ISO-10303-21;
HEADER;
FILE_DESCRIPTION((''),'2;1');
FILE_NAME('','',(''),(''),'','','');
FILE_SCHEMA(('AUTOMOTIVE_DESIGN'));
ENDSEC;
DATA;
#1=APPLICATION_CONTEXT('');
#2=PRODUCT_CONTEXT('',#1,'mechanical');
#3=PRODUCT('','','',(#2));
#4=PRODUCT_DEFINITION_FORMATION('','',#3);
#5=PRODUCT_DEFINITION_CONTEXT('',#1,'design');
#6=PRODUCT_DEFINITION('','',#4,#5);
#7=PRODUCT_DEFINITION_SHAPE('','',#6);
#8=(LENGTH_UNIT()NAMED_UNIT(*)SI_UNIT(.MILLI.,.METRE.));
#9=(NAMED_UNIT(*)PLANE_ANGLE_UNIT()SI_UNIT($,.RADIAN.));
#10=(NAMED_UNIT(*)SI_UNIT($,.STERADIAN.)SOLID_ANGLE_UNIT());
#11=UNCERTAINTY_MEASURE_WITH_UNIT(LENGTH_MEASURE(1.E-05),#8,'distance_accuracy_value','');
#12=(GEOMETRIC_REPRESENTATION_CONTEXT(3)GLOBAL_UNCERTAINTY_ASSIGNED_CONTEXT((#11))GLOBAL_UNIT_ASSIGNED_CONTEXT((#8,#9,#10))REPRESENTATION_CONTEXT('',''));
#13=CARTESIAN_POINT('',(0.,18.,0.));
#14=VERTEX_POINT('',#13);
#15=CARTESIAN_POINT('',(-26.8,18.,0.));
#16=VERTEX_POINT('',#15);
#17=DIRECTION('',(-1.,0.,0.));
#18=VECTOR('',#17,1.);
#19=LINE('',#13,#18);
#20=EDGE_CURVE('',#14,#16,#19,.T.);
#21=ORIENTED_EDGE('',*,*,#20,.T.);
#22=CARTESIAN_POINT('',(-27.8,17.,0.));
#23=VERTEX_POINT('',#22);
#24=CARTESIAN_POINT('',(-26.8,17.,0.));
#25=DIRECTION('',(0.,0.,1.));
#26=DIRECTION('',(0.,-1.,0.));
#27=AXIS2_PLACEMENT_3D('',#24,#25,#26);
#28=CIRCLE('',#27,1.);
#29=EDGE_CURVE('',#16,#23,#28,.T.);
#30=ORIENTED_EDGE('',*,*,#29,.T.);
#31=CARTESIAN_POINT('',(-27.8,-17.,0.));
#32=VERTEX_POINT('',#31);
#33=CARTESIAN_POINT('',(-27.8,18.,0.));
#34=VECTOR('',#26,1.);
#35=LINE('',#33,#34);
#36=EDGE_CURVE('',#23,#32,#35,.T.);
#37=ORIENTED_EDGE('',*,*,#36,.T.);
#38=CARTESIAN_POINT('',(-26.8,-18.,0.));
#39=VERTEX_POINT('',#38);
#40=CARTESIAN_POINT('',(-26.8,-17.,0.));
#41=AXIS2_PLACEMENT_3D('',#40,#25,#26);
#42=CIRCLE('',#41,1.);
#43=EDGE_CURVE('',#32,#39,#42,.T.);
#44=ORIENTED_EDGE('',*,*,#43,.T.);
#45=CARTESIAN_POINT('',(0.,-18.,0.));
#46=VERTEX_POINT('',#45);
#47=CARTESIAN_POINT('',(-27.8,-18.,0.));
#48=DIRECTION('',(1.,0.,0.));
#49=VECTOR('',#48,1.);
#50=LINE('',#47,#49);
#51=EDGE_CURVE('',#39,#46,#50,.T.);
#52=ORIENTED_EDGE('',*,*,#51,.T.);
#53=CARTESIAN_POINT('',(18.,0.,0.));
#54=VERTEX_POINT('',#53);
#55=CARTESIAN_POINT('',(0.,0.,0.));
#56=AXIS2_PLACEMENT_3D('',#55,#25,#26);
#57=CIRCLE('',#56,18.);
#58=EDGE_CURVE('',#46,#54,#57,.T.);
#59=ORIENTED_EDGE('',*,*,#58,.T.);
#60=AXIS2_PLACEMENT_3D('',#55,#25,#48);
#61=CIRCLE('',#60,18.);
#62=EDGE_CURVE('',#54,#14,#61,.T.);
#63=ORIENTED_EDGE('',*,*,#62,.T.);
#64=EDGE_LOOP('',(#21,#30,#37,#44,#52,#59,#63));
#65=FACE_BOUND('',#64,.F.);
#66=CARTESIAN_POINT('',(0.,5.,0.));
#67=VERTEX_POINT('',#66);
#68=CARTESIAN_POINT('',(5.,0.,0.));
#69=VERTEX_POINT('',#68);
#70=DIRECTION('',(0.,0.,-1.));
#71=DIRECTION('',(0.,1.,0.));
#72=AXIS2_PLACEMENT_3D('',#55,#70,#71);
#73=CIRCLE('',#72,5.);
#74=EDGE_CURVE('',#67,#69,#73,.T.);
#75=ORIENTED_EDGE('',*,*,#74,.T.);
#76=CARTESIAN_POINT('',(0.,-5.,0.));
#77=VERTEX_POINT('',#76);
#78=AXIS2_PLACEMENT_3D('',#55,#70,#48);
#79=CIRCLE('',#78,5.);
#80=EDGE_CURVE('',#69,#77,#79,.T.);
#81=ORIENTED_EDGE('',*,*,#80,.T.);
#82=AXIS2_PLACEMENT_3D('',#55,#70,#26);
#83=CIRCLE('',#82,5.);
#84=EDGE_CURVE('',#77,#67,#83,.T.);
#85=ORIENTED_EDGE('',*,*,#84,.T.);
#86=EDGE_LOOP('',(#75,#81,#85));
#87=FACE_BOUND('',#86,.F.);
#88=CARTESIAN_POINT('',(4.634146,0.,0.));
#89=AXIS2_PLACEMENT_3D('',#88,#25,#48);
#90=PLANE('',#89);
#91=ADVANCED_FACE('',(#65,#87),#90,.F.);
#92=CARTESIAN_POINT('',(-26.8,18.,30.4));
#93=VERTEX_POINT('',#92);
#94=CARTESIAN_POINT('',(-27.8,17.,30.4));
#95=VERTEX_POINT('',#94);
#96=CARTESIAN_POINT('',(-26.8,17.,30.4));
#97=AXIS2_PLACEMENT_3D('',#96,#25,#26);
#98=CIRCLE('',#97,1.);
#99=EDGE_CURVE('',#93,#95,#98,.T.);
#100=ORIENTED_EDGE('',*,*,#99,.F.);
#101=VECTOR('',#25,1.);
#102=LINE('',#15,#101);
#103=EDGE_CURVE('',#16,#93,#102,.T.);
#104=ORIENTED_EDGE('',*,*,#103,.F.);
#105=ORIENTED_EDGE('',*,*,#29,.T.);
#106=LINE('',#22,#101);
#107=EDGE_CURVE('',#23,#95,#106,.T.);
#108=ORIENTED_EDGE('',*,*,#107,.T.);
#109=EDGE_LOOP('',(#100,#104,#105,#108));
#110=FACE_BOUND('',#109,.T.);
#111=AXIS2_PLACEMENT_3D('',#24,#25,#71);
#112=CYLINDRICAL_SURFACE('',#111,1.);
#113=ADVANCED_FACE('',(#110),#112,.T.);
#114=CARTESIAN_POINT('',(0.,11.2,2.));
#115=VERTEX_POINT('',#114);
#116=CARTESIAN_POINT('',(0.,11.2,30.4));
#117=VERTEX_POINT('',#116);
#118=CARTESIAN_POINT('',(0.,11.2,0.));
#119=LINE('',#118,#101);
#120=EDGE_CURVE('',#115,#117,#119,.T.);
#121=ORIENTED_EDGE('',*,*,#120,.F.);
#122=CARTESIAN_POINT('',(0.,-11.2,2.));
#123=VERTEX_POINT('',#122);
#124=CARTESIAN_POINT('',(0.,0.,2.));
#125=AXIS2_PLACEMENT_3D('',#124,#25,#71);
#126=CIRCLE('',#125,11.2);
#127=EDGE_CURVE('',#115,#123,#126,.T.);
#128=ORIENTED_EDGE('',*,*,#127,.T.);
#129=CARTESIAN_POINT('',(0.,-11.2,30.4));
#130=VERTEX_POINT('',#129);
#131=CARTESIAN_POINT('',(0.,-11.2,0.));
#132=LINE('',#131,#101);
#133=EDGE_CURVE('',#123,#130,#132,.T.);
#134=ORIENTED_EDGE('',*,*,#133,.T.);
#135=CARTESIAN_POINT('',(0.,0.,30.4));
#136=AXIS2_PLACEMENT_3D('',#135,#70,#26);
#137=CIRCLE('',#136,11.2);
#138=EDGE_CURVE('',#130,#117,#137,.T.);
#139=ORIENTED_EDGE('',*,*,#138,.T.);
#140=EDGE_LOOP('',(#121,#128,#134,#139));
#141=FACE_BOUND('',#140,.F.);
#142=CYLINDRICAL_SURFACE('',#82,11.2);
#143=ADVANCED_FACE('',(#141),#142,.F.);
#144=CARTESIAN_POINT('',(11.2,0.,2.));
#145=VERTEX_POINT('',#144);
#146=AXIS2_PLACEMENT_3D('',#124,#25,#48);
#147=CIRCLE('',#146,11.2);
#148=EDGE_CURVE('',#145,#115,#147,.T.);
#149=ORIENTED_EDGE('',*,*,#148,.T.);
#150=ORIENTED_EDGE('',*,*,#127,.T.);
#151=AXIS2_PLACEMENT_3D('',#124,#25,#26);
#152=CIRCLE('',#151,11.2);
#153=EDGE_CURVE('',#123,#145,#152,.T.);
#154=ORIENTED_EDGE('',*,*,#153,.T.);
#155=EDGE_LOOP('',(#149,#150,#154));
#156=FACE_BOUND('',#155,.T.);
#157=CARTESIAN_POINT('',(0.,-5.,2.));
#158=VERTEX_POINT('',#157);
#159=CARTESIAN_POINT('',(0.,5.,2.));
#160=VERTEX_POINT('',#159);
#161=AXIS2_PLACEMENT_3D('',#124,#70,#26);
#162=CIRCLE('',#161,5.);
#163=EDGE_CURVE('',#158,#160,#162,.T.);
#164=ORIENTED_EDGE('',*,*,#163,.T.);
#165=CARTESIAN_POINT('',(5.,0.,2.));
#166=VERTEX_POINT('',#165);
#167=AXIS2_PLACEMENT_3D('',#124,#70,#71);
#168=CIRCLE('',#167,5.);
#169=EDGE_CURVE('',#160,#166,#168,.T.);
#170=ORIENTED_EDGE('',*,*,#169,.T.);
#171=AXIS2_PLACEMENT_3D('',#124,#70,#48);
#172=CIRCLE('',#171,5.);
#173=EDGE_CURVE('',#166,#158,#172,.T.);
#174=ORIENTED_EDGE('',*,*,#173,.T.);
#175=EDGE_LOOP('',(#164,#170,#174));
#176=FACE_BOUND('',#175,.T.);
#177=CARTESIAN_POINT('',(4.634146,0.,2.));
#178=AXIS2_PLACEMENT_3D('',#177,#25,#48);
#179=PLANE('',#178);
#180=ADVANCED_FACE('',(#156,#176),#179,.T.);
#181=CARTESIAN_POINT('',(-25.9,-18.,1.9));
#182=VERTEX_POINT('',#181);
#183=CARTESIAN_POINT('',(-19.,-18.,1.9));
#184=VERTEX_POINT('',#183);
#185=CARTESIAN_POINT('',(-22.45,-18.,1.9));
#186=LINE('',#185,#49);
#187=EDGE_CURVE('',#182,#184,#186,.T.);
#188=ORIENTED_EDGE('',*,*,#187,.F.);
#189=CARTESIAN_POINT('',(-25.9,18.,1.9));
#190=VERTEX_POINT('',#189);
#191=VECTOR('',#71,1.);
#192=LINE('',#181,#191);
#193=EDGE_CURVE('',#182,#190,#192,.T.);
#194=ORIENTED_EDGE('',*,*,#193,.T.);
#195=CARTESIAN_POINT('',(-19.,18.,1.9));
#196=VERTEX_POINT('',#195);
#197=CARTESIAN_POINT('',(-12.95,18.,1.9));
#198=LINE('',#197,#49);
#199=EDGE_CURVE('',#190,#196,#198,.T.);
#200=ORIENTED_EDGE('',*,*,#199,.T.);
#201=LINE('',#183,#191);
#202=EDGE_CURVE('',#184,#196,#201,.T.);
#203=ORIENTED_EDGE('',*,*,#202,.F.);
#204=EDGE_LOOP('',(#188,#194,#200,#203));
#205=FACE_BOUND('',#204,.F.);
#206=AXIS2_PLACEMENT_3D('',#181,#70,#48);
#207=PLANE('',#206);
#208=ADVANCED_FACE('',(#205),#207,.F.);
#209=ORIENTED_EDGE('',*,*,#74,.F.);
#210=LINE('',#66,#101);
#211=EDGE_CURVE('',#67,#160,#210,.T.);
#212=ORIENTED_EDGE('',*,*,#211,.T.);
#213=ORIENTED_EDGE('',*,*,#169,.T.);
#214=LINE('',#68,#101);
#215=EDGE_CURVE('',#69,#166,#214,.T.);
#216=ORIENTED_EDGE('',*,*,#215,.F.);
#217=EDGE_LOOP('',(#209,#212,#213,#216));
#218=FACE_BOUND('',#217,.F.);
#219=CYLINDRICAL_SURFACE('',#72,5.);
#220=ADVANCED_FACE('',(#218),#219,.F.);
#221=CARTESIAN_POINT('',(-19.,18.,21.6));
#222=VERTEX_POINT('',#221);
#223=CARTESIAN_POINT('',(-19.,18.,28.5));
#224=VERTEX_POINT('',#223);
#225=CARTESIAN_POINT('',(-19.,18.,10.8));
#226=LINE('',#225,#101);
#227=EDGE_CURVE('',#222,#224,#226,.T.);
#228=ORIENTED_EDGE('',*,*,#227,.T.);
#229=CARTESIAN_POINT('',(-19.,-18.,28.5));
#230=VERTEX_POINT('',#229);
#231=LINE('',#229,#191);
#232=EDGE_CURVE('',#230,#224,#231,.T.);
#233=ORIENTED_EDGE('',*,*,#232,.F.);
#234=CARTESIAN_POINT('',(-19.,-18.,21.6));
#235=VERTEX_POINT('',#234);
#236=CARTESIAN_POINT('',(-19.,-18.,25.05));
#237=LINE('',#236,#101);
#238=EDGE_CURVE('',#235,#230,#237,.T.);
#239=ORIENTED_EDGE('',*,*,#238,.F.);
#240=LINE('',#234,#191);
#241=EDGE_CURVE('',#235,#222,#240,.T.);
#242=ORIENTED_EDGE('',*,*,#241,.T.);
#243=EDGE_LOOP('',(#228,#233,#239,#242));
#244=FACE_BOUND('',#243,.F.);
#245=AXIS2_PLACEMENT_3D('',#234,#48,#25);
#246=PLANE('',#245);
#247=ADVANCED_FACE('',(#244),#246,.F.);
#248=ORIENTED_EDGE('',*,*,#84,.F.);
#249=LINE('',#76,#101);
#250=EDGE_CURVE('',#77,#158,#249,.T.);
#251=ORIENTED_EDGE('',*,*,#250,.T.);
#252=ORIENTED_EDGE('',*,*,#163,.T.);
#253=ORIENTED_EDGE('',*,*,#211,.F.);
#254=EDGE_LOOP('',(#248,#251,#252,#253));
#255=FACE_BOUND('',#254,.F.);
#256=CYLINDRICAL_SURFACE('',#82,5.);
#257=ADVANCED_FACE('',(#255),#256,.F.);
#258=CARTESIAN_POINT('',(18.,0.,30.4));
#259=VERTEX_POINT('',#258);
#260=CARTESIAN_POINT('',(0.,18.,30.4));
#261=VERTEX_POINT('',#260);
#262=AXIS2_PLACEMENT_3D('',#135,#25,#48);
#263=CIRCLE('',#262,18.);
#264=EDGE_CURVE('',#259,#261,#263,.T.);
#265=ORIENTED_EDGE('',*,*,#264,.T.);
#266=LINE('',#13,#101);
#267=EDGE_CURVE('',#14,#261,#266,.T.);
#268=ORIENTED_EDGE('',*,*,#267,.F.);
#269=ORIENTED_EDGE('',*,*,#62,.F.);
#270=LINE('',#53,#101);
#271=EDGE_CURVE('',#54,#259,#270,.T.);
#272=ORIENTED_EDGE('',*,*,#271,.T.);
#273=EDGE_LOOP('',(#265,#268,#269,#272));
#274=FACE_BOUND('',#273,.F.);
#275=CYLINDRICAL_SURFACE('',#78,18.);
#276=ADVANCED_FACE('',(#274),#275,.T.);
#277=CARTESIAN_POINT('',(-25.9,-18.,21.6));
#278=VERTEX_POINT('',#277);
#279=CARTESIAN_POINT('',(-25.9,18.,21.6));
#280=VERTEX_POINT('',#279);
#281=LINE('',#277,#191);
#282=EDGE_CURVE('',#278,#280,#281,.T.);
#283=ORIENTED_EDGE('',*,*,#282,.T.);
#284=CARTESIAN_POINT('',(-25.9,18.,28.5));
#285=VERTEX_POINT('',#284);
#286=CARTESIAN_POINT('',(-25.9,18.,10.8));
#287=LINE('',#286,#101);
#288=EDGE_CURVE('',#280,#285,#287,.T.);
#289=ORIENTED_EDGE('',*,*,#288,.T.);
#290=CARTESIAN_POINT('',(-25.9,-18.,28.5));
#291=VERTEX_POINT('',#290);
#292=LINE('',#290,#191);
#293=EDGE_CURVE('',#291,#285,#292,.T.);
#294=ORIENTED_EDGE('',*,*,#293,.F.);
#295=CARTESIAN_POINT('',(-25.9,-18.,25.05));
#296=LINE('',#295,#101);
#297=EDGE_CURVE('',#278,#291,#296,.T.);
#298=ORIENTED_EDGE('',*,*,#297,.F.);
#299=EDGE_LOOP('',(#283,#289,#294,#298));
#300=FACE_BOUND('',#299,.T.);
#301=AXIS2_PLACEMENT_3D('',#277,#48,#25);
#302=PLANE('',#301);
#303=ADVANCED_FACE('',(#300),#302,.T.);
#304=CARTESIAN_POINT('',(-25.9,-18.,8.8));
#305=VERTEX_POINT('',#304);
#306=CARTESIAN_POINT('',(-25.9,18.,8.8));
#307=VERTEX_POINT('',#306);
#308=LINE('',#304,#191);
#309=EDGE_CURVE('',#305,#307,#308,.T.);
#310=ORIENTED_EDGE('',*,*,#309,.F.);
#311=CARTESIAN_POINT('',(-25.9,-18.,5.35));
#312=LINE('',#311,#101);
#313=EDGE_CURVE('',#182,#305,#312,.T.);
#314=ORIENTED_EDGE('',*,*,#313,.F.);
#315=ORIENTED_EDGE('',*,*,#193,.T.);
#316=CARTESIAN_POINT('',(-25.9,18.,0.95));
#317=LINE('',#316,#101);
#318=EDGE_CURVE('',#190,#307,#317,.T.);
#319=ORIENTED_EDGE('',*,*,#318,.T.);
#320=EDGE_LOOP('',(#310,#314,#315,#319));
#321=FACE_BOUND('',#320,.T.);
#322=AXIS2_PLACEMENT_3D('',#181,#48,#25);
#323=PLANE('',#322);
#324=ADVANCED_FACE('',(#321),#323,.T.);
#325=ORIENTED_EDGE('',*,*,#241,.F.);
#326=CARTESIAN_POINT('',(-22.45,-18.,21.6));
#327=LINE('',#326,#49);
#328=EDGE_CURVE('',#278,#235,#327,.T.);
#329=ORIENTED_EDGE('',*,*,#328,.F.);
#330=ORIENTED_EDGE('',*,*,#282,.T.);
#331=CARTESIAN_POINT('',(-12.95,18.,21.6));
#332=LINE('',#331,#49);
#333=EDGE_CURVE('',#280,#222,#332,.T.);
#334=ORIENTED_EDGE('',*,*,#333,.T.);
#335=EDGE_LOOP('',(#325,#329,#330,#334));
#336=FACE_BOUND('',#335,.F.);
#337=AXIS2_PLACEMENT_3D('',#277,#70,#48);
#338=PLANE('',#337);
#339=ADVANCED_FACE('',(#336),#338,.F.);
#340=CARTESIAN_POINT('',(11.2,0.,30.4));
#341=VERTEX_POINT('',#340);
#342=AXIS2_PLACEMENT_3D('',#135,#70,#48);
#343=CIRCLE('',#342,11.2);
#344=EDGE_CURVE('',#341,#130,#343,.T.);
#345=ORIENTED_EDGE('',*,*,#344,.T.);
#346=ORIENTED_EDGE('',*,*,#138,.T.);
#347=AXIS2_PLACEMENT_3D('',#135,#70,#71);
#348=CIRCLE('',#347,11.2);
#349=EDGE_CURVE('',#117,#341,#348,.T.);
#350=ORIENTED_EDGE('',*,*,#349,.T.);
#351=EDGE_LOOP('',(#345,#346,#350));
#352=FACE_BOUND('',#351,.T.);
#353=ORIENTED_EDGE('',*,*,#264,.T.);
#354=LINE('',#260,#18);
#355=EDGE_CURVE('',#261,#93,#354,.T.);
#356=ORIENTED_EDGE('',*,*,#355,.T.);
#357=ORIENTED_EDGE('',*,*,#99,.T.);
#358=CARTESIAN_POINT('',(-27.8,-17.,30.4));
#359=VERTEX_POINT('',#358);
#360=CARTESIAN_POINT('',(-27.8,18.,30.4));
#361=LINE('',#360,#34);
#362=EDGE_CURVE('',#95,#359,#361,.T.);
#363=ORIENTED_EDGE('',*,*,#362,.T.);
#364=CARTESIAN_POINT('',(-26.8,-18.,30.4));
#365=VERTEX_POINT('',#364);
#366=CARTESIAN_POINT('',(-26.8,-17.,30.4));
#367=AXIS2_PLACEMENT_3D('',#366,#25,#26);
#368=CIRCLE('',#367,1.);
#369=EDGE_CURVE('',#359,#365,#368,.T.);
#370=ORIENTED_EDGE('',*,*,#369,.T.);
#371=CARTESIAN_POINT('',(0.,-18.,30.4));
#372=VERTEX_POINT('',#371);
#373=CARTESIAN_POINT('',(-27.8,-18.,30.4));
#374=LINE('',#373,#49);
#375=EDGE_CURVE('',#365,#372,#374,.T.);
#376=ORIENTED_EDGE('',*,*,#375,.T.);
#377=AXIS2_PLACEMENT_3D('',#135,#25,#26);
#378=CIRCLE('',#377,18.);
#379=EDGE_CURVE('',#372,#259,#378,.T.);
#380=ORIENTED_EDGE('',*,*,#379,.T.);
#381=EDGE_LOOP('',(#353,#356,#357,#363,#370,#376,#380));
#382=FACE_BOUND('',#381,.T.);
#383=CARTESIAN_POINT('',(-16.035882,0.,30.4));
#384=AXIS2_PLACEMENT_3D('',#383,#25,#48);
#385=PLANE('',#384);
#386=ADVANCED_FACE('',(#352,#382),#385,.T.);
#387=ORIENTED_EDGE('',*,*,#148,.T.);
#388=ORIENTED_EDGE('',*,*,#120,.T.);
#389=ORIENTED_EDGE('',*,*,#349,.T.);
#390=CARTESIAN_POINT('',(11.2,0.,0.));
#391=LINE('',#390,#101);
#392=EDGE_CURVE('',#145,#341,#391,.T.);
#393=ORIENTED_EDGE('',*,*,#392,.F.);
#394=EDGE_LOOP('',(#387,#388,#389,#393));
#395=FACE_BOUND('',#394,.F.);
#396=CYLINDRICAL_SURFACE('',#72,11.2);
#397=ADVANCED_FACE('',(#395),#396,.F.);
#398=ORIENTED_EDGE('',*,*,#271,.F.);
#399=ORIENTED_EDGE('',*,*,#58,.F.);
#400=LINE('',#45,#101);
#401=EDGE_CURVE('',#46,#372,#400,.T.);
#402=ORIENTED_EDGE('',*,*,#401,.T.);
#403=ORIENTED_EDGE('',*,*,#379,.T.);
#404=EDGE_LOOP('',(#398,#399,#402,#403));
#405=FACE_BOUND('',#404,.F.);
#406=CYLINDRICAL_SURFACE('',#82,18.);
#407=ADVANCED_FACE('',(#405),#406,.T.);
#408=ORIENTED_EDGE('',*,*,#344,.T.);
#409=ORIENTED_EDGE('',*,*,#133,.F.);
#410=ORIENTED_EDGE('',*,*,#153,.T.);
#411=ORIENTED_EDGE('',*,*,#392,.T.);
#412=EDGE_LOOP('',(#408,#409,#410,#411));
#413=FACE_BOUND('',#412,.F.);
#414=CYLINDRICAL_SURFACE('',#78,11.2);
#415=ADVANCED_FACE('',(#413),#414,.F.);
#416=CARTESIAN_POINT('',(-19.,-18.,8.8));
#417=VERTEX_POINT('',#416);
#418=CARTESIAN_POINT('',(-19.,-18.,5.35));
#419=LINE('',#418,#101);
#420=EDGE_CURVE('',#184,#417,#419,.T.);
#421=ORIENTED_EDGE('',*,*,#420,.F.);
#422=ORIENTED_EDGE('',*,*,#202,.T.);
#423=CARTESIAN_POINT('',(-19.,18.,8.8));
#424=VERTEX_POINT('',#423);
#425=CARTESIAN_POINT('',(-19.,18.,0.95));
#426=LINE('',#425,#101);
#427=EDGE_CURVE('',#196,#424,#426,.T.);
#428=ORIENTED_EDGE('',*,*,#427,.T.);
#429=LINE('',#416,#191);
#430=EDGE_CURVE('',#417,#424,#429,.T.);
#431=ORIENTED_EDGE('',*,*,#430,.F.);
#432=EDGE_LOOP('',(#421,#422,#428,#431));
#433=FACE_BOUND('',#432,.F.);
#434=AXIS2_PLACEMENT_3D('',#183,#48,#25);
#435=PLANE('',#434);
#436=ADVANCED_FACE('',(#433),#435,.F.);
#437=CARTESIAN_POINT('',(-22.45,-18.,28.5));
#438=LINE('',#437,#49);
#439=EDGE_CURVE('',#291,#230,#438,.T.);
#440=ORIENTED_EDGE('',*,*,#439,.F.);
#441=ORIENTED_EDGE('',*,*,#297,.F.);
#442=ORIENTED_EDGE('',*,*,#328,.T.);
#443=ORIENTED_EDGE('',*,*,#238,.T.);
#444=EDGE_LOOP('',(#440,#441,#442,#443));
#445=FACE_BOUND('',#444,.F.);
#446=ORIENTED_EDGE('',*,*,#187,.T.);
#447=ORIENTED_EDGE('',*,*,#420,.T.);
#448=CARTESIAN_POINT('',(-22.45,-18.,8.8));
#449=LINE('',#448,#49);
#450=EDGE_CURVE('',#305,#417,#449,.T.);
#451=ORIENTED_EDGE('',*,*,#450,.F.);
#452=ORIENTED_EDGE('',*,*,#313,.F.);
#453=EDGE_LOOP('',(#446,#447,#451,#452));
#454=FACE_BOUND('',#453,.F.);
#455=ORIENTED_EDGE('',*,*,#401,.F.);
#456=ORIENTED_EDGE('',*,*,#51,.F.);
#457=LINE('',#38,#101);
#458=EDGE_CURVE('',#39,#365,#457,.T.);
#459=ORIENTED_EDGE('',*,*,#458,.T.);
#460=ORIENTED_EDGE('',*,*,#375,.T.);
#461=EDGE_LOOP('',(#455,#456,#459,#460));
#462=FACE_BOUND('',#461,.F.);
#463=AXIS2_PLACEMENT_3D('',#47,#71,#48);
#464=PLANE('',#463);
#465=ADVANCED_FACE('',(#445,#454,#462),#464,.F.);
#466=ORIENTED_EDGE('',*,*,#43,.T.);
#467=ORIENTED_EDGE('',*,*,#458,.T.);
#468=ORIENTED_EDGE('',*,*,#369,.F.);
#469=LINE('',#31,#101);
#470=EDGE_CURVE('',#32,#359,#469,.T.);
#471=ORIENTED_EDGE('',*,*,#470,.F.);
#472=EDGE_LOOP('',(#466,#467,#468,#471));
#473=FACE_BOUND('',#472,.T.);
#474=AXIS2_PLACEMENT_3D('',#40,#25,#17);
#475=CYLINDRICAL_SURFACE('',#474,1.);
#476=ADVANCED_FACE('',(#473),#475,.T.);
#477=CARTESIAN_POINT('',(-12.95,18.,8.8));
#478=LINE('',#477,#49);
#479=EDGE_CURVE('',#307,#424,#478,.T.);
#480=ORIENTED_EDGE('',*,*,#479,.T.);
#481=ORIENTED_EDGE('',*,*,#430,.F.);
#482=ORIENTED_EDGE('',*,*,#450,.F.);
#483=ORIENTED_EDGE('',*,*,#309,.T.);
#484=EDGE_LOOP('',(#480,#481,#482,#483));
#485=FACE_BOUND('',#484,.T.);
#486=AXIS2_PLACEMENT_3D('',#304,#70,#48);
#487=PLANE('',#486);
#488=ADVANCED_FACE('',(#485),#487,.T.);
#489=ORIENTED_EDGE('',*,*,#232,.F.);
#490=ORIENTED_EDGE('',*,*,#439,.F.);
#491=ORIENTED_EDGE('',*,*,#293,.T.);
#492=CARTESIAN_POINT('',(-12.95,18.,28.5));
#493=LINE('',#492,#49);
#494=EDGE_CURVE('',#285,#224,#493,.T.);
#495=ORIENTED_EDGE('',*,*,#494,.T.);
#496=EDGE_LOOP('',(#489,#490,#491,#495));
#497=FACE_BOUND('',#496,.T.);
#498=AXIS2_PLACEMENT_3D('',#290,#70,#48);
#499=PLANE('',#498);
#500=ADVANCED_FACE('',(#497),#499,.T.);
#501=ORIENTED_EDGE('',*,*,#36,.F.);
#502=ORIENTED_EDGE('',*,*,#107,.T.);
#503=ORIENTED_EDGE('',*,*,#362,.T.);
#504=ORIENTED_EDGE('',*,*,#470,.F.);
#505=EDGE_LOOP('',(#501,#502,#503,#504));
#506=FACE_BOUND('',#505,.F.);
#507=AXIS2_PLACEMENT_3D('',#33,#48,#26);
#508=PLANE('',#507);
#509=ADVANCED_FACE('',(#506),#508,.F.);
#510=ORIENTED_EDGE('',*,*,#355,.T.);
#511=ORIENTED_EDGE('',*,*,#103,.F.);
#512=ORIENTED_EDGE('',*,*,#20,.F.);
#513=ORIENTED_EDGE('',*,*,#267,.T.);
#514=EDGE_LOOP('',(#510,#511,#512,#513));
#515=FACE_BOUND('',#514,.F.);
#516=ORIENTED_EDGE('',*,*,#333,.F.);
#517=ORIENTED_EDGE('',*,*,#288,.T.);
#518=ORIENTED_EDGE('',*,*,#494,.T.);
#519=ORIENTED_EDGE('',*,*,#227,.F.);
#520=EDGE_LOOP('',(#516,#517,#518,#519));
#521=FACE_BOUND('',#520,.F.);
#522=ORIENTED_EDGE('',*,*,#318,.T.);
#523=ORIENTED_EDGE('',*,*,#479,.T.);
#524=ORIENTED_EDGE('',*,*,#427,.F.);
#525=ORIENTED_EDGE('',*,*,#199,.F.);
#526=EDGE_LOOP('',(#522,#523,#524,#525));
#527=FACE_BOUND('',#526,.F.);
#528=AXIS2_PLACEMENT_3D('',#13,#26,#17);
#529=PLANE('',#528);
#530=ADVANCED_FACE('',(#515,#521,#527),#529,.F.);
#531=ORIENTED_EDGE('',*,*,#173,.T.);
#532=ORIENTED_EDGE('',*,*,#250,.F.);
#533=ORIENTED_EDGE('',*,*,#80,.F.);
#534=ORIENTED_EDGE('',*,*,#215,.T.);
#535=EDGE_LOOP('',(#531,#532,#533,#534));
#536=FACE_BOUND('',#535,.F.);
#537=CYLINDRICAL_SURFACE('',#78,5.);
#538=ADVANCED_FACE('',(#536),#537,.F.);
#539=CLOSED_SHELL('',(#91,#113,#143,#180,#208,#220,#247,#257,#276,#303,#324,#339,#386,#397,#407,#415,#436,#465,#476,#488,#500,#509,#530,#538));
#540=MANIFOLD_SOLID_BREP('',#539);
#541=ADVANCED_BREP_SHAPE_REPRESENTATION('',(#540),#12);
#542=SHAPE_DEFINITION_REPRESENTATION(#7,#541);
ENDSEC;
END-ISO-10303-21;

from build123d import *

# Parameters (mm, degrees)
F1_DEPTH = 30.4
F2_DEPTH = 2
F3_W     = 6.9
F3_H     = 6.9
F4_DEPTH = 50
F5_R     = 1


# Not quite as in the source:
# - a feature of the source that left no trace in its solid (it failed there, or was rolled back) is left out
# - a feature names something its author has since deleted; it is built from what else it names


with BuildPart() as f1:
    # F0 (on Top) → F1 (new body)
    with BuildSketch(Plane.XY):
        with BuildLine():
            ThreePointArc((0, -18), (-18, 0), (0, 18))
            Line((0, 18), (-27.8, 18))
            Line((-27.8, 18), (-27.8, -18))
            Line((-27.8, -18), (0, -18))
        make_face()
        with BuildLine():
            ThreePointArc((0, -11.2), (-11.2, 0), (0, 11.2))
            Line((0, 11.2), (0, 18))
            ThreePointArc((0, 18), (-18, 0), (0, -18))
            Line((0, -18), (0, -11.2))
        make_face()
        with BuildLine():
            ThreePointArc((0, 11.2), (7.9195959493, 7.9195959493), (11.2, 0))
            ThreePointArc((11.2, 0), (7.9195959493, -7.9195959493), (0, -11.2))
            Line((0, -11.2), (0, -18))
            ThreePointArc((0, -18), (12.7279220614, -12.7279220614), (18, 0))
            ThreePointArc((18, 0), (12.7279220614, 12.7279220614), (0, 18))
            Line((0, 18), (0, 11.2))
        make_face()
    extrude(amount=F1_DEPTH)

    # F0 (on Top) → F2 (join)
    with BuildSketch(Plane.XY):
        with BuildLine():
            ThreePointArc((0, -11.2), (7.9195959493, -7.9195959493), (11.2, 0))
            ThreePointArc((11.2, 0), (7.9195959493, 7.9195959493), (0, 11.2))
            Line((0, 11.2), (0, 5))
            ThreePointArc((0, 5), (3.5355339059, 3.5355339059), (5, 0))
            ThreePointArc((5, 0), (3.5355339059, -3.5355339059), (0, -5))
            Line((0, -5), (0, -11.2))
        make_face()
        with BuildLine():
            Line((0, 5), (0, 11.2))
            ThreePointArc((0, 11.2), (-11.2, 0), (0, -11.2))
            Line((0, -11.2), (0, -5))
            ThreePointArc((0, -5), (-5, 0), (0, 5))
        make_face()
    extrude(amount=F2_DEPTH)

    # F3 (on face) → F4 (cut)
    with BuildSketch(Plane.XZ.offset(18)):
        with Locations((-22.45, 25.05)):
            Rectangle(F3_W, F3_H)
        with Locations((-22.45, 5.35)):
            Rectangle(F3_W, F3_H)
    extrude(amount=-F4_DEPTH, mode=Mode.SUBTRACT)

    # F5
    f5_edges = [f1.edges().sort_by_distance(p)[0] for p in [
        (-27.8, 18, 15.2),
        (-27.8, -18, 15.2),
    ]]
    fillet(f5_edges, radius=F5_R)


solid = f1.part
